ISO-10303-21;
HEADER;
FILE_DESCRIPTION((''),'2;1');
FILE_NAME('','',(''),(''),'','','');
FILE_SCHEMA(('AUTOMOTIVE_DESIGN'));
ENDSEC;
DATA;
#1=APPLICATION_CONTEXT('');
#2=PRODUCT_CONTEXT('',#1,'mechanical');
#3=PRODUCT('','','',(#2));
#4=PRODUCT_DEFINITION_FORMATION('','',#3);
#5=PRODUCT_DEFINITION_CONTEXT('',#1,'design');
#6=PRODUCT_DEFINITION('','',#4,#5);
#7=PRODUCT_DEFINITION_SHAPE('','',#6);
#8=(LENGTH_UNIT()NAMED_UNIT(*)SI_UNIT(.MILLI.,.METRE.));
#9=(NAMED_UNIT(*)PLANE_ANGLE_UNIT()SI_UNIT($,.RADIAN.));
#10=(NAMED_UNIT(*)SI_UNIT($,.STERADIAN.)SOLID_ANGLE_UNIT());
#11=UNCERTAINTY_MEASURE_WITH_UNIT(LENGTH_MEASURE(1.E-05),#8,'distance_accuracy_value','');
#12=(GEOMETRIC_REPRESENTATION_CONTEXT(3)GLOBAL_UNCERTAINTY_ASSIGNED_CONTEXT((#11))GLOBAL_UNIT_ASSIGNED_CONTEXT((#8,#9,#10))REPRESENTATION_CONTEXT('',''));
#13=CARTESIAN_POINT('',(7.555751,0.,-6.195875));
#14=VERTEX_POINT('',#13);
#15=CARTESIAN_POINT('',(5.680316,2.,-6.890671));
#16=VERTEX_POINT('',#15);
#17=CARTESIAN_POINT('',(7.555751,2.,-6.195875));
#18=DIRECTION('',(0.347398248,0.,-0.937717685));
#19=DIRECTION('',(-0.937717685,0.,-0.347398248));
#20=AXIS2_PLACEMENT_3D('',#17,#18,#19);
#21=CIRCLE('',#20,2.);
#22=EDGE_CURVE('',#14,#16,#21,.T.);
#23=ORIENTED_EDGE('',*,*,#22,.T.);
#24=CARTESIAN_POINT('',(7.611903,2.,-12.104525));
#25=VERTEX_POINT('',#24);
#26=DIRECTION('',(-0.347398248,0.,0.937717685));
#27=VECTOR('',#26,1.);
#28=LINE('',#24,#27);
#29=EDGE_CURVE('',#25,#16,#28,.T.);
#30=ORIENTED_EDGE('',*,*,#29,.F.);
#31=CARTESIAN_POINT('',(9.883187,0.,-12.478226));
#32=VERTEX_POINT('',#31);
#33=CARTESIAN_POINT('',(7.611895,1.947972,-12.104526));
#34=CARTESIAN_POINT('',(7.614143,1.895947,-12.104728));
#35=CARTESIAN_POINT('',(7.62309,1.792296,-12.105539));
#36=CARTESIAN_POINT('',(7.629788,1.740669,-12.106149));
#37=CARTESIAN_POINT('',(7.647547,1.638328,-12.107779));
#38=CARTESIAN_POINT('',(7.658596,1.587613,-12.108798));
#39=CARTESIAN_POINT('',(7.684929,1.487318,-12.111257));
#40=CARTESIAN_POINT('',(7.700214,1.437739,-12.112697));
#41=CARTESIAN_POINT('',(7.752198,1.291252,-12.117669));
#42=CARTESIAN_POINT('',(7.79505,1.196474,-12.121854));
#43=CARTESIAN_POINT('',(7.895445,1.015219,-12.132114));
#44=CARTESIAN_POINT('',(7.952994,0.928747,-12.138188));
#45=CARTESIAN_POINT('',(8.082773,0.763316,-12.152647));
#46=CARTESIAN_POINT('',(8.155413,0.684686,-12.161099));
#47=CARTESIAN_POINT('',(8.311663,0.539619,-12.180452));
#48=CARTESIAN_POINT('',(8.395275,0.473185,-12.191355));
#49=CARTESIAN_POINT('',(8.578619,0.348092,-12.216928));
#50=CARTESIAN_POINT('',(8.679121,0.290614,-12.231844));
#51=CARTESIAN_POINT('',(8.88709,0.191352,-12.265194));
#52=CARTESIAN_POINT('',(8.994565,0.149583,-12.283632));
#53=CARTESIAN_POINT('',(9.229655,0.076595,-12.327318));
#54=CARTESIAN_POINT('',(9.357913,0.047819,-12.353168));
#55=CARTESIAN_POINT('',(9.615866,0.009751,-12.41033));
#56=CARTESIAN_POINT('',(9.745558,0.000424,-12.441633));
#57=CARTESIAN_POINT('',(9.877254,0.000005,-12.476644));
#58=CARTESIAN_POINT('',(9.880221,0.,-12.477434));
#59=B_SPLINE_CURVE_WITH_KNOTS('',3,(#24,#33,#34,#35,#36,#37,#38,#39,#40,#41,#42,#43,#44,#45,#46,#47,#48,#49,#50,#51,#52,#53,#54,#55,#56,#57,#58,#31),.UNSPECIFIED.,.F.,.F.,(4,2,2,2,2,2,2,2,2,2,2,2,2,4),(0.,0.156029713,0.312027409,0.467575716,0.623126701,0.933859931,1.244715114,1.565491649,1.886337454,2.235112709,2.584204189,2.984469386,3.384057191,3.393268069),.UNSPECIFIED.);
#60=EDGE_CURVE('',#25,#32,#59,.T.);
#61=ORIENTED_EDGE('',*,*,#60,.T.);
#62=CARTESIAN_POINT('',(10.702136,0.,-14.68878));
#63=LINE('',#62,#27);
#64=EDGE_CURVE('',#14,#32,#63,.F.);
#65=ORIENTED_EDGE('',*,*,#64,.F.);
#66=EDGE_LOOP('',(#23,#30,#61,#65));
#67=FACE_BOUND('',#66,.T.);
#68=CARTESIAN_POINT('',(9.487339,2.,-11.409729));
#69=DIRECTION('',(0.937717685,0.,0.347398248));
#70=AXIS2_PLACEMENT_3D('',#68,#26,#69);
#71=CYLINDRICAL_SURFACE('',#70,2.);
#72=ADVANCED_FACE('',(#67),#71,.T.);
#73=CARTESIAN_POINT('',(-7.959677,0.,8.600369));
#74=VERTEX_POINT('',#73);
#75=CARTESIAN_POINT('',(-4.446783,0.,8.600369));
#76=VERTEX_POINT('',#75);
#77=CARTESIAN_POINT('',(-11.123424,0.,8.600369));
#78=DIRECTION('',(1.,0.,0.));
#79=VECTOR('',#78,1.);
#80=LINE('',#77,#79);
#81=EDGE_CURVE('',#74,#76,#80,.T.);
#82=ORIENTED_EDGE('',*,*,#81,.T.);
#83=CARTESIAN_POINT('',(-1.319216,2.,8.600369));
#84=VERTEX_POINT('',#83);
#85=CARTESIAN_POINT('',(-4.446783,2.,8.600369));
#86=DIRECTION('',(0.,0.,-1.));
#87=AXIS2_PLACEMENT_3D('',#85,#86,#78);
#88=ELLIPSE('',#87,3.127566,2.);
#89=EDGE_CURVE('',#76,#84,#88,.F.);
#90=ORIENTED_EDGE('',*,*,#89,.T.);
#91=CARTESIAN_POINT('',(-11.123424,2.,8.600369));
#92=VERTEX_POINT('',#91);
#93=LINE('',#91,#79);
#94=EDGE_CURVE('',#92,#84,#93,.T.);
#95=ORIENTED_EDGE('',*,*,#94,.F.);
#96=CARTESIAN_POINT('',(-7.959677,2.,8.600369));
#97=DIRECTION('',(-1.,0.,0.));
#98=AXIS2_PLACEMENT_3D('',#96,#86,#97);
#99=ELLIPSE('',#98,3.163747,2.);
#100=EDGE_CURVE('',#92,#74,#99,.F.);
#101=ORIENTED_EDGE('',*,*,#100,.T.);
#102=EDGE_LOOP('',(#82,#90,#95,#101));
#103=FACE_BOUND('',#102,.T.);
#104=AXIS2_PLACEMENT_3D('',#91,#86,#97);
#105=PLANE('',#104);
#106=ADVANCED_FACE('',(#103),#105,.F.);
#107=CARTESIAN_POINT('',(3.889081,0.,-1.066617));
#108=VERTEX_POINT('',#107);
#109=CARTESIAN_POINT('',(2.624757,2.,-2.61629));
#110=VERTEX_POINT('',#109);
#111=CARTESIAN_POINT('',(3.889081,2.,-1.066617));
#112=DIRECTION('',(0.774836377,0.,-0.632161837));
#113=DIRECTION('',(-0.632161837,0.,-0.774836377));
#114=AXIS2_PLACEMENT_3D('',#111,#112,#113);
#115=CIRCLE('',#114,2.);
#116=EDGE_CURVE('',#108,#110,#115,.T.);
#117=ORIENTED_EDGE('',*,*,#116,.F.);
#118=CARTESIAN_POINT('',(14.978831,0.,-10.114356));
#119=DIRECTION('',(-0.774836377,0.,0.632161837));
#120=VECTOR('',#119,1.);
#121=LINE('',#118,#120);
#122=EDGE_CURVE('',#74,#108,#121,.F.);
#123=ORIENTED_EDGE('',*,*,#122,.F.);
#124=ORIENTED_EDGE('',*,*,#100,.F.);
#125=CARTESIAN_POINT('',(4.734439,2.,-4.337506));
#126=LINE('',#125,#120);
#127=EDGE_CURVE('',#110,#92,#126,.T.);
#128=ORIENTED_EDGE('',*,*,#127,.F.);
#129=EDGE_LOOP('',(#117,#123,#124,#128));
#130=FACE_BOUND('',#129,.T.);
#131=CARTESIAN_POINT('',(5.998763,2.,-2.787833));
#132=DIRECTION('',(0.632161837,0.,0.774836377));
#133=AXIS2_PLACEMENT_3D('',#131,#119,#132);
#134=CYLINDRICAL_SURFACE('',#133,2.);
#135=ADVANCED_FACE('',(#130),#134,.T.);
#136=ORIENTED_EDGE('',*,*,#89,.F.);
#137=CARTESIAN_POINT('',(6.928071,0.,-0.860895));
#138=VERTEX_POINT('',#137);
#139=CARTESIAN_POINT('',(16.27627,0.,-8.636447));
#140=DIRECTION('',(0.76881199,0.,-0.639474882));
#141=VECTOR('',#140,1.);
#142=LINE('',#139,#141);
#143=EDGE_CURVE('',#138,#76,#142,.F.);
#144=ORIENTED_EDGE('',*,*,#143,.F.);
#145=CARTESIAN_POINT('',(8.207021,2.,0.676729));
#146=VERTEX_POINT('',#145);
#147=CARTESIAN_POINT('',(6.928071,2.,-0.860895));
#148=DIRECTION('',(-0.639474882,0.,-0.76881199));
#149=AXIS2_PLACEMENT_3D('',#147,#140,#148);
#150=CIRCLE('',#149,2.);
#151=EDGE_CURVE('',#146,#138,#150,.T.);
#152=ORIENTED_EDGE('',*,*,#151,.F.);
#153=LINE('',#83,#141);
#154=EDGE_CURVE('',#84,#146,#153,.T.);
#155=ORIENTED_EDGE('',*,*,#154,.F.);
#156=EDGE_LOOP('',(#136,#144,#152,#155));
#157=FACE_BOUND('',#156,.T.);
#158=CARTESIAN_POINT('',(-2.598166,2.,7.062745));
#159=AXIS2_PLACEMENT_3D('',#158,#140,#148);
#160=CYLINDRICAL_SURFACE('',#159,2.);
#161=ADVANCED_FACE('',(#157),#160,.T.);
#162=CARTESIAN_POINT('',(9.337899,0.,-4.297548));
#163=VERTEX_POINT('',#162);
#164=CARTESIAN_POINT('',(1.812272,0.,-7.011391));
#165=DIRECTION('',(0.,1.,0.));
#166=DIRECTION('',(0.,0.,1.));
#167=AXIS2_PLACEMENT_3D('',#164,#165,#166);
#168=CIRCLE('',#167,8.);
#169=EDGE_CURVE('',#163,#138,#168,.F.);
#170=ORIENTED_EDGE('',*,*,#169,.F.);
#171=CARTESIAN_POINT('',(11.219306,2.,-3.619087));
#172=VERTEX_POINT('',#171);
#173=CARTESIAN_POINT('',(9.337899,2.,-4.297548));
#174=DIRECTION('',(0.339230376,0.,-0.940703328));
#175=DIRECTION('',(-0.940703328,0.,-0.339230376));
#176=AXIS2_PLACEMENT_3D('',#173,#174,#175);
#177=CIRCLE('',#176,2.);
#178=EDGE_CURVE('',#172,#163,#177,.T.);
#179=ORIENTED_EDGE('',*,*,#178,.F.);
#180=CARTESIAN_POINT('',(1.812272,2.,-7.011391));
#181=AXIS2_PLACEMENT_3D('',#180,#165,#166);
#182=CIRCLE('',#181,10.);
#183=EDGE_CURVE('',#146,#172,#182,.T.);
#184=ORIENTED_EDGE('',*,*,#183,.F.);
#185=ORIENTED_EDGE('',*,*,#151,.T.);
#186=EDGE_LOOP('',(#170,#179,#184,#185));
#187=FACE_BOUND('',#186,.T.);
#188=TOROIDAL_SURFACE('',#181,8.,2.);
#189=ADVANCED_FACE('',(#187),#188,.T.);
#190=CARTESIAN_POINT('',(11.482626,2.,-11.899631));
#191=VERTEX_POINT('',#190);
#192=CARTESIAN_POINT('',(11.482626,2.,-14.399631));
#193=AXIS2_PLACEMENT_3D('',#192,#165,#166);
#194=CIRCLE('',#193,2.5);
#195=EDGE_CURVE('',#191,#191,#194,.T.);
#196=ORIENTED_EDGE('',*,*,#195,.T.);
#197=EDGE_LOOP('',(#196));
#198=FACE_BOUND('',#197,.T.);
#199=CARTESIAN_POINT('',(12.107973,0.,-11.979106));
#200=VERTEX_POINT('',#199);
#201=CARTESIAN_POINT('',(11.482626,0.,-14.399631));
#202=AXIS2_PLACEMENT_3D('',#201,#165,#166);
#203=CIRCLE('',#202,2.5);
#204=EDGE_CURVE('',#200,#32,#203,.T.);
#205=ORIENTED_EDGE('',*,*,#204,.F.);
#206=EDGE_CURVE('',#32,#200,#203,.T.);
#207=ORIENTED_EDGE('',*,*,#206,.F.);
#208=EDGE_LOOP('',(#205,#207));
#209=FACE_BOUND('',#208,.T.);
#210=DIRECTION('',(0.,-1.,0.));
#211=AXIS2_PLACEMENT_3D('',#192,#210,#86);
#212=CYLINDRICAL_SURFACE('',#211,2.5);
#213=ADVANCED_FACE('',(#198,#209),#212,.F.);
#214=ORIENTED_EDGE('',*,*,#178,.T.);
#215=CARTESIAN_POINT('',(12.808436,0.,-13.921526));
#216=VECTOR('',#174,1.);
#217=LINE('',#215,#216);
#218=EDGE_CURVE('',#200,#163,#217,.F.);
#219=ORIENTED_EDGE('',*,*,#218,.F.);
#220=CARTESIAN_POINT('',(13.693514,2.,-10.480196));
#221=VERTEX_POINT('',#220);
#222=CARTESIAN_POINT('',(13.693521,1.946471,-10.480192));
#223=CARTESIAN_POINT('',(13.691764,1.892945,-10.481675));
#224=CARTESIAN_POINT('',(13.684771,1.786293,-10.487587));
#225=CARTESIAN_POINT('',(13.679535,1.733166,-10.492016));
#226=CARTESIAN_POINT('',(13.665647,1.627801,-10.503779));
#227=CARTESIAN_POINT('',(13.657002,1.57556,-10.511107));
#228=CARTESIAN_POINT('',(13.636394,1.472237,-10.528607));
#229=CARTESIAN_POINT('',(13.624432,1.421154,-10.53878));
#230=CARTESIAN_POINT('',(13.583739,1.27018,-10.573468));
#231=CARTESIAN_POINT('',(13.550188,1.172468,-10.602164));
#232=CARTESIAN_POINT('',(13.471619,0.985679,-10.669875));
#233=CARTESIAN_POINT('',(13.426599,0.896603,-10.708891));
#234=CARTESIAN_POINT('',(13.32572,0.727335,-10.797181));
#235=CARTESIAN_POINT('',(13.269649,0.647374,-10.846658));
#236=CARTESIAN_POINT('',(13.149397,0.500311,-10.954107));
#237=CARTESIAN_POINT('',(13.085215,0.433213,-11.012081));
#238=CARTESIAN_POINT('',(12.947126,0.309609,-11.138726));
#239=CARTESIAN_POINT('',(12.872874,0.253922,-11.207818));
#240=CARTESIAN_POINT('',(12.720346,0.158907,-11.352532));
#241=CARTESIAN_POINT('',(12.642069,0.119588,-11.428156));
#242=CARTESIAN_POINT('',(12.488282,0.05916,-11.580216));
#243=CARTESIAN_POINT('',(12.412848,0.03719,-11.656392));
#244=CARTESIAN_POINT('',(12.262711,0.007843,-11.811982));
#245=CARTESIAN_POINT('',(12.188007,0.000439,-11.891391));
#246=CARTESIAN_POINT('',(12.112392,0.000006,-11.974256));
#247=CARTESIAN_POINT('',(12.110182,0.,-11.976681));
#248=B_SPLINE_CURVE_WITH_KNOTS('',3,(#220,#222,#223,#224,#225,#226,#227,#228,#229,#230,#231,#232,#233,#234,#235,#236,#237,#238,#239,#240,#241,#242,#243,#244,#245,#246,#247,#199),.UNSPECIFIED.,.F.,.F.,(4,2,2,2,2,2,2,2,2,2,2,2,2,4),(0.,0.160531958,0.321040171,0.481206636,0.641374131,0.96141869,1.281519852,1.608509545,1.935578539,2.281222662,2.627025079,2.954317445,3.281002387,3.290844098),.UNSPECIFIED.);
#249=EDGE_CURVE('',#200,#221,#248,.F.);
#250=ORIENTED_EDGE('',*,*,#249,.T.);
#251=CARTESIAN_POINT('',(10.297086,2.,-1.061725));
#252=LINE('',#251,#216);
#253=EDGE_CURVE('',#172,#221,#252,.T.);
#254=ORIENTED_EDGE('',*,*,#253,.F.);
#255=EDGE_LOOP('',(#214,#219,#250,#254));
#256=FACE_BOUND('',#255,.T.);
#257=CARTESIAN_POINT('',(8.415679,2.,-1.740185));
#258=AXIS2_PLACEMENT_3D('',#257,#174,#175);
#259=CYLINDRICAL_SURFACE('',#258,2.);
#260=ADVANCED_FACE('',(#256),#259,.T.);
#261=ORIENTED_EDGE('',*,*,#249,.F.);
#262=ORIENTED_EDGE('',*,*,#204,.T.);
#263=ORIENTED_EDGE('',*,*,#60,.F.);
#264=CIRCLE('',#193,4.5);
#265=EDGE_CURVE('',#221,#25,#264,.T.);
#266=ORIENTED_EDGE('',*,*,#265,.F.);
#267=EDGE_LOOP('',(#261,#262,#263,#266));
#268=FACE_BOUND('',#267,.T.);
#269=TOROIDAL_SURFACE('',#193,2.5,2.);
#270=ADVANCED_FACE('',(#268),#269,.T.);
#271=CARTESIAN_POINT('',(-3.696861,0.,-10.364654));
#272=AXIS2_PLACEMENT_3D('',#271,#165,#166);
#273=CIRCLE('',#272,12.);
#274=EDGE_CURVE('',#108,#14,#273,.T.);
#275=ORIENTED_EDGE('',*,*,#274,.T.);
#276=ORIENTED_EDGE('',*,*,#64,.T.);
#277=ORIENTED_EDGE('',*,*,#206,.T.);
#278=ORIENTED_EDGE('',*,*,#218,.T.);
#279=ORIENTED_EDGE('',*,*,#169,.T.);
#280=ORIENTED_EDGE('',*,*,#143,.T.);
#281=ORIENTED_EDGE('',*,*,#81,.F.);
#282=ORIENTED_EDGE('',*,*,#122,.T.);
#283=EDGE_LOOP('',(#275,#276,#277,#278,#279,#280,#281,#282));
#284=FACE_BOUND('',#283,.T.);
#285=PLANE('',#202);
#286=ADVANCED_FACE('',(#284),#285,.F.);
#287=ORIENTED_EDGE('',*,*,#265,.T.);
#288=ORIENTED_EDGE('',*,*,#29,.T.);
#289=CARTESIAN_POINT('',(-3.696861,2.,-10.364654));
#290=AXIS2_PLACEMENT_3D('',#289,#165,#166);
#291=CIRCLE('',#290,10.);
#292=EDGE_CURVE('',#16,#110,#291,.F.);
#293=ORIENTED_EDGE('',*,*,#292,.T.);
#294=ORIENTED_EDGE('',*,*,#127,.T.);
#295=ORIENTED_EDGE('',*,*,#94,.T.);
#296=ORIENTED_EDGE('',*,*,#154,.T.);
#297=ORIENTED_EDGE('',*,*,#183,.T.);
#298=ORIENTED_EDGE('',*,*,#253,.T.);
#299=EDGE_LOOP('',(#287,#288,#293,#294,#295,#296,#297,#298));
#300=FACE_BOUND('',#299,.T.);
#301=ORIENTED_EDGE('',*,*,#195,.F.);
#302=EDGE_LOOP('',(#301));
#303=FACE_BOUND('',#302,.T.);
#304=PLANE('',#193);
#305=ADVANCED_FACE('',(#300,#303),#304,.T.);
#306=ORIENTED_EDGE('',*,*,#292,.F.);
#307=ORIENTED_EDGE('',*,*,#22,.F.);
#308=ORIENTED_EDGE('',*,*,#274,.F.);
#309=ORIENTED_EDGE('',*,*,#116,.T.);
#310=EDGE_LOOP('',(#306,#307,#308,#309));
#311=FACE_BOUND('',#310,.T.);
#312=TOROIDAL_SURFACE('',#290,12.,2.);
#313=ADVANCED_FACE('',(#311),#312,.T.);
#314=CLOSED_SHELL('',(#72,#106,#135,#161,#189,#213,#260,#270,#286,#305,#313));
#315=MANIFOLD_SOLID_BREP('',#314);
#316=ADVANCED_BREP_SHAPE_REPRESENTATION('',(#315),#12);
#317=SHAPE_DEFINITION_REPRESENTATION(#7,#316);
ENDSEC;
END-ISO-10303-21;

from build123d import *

# Parameters (mm, degrees)
SKETCH1_R           = 2.5000000000000004
BOSS_EXTRUDE1_DEPTH = 2
FILLET1_R           = 10
FILLET2_R           = 10
FILLET3_R           = 2
FILLET4_R           = 2


with BuildPart() as part:
    # Sketch1 → Boss-Extrude1 (new body)
    with BuildSketch(Plane(origin=(0, 0, 0), x_dir=(1, 0, 0), z_dir=(0, 1, 0))):
        with BuildLine():
            Line((4.734439187943633, 4.337505524576787), (-11.123424173439652, -8.60036927980545))
            Line((-11.123424173439652, -8.60036927980545), (-1.3192163601402593, -8.60036927980545))
            Line((-1.3192163601402593, -8.60036927980545), (10.29708605182919, 1.0617245936219641))
            Line((10.29708605182919, 1.0617245936219641), (13.693514413313048, 10.480195617492226))
            ThreePointArc((13.693514413313048, 10.480195617492226), (12.643820805599, 18.747230765158918), (7.611903426882685, 12.104525420451473))
            Line((7.611903426882685, 12.104525420451473), (4.734439187943633, 4.337505524576787))
        make_face()
        with Locations(Location((11.482625796556237, 14.39963072019455, 0), (0, 0, 270))):
            Circle(SKETCH1_R, mode=Mode.SUBTRACT)
    extrude(amount=BOSS_EXTRUDE1_DEPTH)

    # Fillet1
    fillet1_edges = [part.edges().sort_by_distance(p)[0] for p in [
        (10.29708605182919, 1, -1.0617245936219641),
    ]]
    fillet(fillet1_edges, radius=FILLET1_R)

    # Fillet2
    fillet2_edges = [part.edges().sort_by_distance(p)[0] for p in [
        (4.734439187943633, 1, -4.337505524576787),
    ]]
    fillet(fillet2_edges, radius=FILLET2_R)

    # Fillet3
    fillet3_edges = [part.edges().sort_by_distance(p)[0] for p in [
        (6.6461096923169105, 0, -9.49759844281185),
        (4.438286722207531, 0, -4.549211293465088),
        (12.456410034317898, 0, -7.049641368446211),
        (9.999920903343424, 0, -1.270100820961935),
        (-4.249333346620522, 0, 2.9920395518602865),
        (3.4439024153195033, 0, 4.638549149214148),
    ]]
    fillet(fillet3_edges, radius=FILLET3_R - 0.0001)  # a hair under: the kernel refuses the full size

    # Fillet4
    fillet4_edges = [part.edges().sort_by_distance(p)[0] for p in [
        (12.744313913733468, 3.2e-16, -18.719137994754206),
    ]]
    fillet(fillet4_edges, radius=FILLET4_R - 0.0001)  # a hair under: the kernel refuses the full size


solid = part.part
